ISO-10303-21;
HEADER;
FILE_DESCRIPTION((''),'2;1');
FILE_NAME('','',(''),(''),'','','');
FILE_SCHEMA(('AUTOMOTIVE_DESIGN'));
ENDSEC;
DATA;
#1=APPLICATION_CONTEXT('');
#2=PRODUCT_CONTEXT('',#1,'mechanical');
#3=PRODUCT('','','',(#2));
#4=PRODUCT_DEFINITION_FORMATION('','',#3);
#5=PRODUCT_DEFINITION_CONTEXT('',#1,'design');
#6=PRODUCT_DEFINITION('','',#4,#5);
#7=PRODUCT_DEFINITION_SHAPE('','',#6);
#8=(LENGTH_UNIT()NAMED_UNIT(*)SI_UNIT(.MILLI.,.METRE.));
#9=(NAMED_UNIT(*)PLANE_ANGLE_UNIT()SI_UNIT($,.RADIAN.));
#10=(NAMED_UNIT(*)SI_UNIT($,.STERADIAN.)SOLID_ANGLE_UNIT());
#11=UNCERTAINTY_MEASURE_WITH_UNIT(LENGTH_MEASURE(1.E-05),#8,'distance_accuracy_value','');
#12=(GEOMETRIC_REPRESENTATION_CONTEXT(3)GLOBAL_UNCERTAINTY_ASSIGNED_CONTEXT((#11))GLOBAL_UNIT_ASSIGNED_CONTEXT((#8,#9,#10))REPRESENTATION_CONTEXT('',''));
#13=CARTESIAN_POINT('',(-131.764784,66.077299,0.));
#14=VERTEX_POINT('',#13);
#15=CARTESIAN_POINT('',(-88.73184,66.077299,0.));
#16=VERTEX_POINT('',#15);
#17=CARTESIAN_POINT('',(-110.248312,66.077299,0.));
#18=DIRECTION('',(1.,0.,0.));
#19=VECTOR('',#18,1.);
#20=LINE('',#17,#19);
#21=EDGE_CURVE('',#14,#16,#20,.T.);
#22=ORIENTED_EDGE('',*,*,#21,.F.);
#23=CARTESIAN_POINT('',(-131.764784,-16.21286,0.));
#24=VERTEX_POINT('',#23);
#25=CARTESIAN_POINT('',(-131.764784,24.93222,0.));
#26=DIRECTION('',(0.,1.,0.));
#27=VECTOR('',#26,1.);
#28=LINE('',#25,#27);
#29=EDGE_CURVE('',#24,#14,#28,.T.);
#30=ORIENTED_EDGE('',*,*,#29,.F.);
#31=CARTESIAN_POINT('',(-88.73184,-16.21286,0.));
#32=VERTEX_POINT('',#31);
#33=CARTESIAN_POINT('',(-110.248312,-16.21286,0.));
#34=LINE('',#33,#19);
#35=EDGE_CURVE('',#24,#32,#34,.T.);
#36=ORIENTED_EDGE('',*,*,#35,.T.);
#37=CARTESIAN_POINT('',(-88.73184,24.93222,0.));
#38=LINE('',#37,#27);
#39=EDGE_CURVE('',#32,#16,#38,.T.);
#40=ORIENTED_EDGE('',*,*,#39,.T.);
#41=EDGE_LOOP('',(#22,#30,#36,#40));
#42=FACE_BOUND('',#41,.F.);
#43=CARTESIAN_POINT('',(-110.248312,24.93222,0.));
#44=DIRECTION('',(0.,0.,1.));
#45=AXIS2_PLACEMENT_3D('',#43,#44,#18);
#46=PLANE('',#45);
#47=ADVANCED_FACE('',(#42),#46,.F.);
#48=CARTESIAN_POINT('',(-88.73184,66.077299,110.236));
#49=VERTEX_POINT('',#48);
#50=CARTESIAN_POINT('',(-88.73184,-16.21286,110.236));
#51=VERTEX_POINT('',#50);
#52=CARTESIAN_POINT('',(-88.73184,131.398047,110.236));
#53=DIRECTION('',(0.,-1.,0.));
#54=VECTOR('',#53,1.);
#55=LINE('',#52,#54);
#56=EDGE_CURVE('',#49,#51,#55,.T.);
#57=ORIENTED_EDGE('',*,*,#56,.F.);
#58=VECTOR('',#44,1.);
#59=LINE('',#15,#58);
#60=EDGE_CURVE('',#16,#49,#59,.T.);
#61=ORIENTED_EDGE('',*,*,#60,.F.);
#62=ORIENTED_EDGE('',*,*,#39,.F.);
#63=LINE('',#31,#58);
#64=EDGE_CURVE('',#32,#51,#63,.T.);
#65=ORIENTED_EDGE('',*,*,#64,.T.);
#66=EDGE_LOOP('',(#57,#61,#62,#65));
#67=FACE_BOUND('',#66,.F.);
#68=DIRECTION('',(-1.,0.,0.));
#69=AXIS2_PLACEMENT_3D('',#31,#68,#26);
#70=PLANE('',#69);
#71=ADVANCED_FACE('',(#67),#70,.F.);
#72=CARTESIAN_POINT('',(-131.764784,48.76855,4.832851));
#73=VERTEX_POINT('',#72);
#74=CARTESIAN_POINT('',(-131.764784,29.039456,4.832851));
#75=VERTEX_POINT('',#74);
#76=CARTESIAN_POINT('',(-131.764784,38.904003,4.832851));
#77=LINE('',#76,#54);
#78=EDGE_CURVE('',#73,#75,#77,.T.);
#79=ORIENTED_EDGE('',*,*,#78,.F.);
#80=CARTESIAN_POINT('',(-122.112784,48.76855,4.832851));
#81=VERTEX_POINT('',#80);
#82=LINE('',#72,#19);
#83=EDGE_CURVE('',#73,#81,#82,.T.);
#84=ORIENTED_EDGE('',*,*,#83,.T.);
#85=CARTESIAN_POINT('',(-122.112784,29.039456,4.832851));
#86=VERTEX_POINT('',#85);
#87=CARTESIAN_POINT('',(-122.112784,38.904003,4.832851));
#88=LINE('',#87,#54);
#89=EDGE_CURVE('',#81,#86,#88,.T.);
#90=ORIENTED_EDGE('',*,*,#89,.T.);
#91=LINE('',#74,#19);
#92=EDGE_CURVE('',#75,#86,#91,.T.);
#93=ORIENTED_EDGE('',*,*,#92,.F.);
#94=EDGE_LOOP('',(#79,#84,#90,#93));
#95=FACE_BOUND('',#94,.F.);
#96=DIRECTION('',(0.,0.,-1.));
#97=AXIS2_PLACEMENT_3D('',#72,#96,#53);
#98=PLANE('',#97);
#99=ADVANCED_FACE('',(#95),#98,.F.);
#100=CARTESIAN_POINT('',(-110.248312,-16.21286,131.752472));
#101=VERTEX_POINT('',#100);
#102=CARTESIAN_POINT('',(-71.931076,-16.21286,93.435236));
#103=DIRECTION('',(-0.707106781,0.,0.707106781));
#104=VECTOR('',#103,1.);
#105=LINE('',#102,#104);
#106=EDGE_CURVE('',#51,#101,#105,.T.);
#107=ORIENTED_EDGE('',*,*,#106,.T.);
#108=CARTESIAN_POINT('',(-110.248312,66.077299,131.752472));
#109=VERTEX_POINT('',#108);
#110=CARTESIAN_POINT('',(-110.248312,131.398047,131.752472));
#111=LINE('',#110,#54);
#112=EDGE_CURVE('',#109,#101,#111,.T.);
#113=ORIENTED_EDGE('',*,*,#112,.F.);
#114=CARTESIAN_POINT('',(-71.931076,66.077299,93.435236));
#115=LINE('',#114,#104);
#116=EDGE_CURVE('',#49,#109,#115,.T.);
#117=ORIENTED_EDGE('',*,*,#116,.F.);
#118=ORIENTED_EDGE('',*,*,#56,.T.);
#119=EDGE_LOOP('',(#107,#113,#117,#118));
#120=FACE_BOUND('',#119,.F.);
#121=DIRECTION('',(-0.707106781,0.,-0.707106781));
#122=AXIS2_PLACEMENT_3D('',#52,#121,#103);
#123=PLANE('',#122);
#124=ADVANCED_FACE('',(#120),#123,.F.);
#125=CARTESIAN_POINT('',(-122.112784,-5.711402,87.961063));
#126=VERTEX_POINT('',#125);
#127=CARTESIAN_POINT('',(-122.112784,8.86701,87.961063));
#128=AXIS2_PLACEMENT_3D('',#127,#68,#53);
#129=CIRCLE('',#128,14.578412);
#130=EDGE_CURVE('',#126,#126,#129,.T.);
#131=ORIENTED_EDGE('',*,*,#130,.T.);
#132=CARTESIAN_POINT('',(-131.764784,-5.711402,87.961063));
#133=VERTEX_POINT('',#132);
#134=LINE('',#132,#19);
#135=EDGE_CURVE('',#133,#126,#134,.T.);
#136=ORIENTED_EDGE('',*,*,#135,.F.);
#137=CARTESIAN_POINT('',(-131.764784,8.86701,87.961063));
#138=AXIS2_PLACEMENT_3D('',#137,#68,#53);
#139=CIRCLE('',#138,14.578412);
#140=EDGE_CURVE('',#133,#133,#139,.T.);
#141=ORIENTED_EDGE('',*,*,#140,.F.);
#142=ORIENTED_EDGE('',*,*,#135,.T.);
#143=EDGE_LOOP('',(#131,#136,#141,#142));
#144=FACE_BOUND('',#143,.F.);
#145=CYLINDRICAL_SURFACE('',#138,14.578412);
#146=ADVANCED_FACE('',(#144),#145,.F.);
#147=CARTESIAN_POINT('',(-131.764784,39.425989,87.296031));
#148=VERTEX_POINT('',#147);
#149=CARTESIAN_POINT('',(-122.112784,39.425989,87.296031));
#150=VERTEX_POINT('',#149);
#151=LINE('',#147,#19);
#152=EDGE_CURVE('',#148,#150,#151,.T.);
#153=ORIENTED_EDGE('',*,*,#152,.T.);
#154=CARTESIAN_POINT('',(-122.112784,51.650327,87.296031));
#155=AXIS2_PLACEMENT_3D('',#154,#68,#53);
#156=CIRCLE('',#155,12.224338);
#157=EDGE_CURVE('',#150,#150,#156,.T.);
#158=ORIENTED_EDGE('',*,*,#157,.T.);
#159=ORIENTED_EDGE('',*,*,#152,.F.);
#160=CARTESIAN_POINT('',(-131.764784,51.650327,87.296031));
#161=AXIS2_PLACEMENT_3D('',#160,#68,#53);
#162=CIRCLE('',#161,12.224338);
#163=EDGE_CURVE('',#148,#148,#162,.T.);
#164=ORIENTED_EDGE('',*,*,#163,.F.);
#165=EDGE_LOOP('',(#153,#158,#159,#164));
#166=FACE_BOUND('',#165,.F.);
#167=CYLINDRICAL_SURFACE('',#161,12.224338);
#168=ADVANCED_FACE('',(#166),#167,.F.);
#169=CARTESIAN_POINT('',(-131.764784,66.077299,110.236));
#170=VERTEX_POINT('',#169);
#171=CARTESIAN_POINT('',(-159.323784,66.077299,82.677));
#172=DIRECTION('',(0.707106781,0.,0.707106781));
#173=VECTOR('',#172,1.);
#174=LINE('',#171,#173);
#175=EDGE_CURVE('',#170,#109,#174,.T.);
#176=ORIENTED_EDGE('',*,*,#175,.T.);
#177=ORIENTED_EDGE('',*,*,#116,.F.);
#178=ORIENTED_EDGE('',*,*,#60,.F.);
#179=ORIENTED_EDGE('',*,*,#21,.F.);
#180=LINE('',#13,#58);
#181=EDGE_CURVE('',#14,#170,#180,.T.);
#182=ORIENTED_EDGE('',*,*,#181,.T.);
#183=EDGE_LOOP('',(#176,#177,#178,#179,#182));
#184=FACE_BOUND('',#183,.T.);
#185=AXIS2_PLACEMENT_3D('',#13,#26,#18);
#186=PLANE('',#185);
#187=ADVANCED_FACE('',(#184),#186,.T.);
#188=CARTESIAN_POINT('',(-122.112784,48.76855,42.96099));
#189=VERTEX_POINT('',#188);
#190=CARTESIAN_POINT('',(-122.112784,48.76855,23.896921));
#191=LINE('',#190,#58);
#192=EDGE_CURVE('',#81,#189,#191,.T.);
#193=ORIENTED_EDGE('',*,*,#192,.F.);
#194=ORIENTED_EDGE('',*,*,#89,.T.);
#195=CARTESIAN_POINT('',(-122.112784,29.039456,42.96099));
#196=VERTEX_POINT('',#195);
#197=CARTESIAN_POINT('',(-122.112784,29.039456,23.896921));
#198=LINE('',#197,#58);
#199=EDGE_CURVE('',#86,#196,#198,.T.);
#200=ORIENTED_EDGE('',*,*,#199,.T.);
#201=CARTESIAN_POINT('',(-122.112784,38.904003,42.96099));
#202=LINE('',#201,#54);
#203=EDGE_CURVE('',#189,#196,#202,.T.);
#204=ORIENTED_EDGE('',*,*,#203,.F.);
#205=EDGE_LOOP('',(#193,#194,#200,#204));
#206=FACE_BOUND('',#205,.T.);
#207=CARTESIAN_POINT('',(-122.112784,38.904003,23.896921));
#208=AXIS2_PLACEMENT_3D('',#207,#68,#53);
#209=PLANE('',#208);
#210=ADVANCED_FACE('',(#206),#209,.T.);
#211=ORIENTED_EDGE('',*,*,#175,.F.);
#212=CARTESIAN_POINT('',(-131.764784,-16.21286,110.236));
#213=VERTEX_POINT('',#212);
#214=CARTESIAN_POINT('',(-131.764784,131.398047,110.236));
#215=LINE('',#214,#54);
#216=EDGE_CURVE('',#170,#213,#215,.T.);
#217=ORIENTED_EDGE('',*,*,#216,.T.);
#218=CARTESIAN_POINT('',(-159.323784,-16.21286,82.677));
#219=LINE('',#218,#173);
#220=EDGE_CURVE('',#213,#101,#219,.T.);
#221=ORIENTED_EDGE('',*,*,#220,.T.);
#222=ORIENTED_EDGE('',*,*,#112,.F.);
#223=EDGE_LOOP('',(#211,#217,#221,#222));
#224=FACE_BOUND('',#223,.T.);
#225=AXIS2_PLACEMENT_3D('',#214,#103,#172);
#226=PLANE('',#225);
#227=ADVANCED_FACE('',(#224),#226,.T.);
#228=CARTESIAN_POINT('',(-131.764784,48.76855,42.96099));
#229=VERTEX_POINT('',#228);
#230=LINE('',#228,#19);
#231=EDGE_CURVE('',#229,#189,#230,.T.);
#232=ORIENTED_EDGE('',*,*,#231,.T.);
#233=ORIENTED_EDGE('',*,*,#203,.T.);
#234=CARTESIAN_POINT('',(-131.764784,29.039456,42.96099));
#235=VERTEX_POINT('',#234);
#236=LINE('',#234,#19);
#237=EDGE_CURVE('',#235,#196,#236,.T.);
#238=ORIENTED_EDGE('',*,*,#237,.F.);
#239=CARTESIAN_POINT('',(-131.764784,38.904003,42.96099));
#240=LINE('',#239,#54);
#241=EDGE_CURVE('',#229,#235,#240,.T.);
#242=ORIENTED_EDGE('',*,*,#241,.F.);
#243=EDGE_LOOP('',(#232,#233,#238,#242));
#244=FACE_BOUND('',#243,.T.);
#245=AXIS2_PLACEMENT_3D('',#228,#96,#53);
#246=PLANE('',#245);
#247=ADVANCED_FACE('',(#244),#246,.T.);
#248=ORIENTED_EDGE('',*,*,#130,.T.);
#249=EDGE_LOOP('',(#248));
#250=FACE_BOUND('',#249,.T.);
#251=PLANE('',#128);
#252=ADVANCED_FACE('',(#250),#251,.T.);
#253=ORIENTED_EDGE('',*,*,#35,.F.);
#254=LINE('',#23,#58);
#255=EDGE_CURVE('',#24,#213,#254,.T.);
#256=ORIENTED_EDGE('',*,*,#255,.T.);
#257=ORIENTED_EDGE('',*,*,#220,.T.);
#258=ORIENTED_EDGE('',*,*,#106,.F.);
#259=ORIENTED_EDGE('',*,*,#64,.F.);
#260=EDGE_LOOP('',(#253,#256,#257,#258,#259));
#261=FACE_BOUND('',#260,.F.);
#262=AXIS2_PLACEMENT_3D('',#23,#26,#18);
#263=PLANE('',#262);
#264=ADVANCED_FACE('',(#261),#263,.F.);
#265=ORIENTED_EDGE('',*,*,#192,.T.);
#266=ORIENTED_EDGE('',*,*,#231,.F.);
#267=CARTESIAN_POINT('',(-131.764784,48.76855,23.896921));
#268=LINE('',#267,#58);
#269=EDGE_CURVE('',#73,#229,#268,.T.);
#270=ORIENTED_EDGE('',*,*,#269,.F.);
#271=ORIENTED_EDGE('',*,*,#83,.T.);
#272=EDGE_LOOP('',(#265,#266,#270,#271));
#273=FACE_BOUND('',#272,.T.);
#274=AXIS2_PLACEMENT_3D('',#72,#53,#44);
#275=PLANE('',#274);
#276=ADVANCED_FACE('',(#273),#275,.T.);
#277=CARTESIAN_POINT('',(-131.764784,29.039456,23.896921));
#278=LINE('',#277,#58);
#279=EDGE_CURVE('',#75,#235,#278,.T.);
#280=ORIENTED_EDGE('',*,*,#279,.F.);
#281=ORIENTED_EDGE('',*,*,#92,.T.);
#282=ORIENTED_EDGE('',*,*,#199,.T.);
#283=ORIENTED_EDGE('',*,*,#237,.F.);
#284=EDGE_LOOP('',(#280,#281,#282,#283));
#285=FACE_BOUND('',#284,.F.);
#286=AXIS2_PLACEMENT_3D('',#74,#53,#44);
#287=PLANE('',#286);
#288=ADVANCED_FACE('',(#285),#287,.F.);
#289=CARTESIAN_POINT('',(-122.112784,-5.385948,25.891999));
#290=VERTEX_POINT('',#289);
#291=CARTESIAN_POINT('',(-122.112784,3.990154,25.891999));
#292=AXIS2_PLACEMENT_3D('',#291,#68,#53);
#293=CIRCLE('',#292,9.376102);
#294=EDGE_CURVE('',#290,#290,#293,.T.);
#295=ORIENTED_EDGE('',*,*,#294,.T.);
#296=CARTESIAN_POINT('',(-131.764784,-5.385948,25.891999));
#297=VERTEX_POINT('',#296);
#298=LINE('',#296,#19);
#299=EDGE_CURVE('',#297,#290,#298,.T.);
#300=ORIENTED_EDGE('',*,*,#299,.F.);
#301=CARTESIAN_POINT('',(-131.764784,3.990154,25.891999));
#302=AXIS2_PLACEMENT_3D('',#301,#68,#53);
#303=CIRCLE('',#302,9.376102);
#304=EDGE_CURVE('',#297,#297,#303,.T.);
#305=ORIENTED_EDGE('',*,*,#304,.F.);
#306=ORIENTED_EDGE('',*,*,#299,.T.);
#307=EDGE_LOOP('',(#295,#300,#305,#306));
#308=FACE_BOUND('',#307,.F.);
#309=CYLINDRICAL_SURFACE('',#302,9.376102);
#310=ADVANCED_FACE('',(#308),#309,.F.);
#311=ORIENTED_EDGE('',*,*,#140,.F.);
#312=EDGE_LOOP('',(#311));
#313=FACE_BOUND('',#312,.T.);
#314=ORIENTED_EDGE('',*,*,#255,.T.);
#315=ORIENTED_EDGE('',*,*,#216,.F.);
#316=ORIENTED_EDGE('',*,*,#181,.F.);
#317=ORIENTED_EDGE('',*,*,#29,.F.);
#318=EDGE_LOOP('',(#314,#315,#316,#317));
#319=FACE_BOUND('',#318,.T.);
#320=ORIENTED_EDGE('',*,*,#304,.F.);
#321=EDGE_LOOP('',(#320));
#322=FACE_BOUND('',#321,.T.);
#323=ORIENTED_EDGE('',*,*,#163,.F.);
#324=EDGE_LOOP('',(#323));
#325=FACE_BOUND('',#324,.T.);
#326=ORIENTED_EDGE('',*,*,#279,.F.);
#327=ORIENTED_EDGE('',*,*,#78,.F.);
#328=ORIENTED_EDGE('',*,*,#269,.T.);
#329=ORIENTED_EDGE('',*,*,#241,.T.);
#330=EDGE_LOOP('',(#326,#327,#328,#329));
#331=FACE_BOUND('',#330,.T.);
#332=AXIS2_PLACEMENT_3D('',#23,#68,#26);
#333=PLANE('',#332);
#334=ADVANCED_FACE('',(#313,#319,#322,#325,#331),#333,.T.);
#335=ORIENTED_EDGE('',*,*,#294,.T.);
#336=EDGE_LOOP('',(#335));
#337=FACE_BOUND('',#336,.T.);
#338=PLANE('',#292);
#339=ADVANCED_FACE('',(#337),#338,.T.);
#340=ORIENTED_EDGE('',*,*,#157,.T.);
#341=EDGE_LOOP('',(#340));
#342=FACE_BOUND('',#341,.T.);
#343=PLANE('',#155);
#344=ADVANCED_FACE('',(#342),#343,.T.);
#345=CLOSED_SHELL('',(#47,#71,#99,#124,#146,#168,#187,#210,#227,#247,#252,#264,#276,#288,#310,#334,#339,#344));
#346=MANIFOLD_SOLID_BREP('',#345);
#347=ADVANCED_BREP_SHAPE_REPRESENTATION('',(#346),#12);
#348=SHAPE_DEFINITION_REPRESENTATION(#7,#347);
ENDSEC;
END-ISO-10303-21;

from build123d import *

# Parameters (mm, degrees)
F0_W        = 43.0329442024
F0_H        = 82.2901595384
F1_DEPTH    = 135.636
F2_T1_DEPTH = 212.9316553271
F3_W        = 19.7290945798
F3_H        = 38.1281389855
F3_R        = 12.2243381544
F3_R_2      = 14.5784118216
F3_R_3      = 9.3761022788
F4_DEPTH    = 9.652


# Not quite as in the source:
# - a fillet or chamfer that OpenCascade refuses, or shapes differently, is made with other operations: its cross-section is extruded or revolved along the edge and cut away or added


with BuildPart() as f1:
    # F0 (on Top) → F1 (new body)
    with BuildSketch(Plane.XY):
        with Locations((-110.2483123541, 24.9322196469)):
            Rectangle(F0_W, F0_H)
    extrude(amount=F1_DEPTH)

    # F2: chamfer of 25.4 on 2 edges, made by hand

    # F2_s2 → F2_t1 (cut)
    with BuildSketch(Plane.XZ.offset(-131.3980473104)):
        Polygon((-131.7647844553, 110.236), (-106.3647844553, 135.636), (-131.7647844553, 135.636), align=None)
        Polygon((-88.7318402529, 110.236), (-114.1318402529, 135.636), (-88.7318402529, 135.636), align=None)
    extrude(amount=F2_T1_DEPTH, mode=Mode.SUBTRACT)

    # F3 (on face) → F4 (cut)
    with BuildSketch(Plane(origin=(-131.7647844553, 0, 0), x_dir=(0, -1, 0), z_dir=(-1, 0, 0))):
        with Locations((-38.9040028676, 23.8969207276)):
            Rectangle(F3_W, F3_H)
        with Locations((-51.650326699, 87.2960314155)):
            Circle(F3_R)
        with Locations((-8.8670095429, 87.961062789)):
            Circle(F3_R_2)
        with Locations((-3.9901542477, 25.8919987828)):
            Circle(F3_R_3)
    extrude(amount=-F4_DEPTH, mode=Mode.SUBTRACT)


solid = f1.part
